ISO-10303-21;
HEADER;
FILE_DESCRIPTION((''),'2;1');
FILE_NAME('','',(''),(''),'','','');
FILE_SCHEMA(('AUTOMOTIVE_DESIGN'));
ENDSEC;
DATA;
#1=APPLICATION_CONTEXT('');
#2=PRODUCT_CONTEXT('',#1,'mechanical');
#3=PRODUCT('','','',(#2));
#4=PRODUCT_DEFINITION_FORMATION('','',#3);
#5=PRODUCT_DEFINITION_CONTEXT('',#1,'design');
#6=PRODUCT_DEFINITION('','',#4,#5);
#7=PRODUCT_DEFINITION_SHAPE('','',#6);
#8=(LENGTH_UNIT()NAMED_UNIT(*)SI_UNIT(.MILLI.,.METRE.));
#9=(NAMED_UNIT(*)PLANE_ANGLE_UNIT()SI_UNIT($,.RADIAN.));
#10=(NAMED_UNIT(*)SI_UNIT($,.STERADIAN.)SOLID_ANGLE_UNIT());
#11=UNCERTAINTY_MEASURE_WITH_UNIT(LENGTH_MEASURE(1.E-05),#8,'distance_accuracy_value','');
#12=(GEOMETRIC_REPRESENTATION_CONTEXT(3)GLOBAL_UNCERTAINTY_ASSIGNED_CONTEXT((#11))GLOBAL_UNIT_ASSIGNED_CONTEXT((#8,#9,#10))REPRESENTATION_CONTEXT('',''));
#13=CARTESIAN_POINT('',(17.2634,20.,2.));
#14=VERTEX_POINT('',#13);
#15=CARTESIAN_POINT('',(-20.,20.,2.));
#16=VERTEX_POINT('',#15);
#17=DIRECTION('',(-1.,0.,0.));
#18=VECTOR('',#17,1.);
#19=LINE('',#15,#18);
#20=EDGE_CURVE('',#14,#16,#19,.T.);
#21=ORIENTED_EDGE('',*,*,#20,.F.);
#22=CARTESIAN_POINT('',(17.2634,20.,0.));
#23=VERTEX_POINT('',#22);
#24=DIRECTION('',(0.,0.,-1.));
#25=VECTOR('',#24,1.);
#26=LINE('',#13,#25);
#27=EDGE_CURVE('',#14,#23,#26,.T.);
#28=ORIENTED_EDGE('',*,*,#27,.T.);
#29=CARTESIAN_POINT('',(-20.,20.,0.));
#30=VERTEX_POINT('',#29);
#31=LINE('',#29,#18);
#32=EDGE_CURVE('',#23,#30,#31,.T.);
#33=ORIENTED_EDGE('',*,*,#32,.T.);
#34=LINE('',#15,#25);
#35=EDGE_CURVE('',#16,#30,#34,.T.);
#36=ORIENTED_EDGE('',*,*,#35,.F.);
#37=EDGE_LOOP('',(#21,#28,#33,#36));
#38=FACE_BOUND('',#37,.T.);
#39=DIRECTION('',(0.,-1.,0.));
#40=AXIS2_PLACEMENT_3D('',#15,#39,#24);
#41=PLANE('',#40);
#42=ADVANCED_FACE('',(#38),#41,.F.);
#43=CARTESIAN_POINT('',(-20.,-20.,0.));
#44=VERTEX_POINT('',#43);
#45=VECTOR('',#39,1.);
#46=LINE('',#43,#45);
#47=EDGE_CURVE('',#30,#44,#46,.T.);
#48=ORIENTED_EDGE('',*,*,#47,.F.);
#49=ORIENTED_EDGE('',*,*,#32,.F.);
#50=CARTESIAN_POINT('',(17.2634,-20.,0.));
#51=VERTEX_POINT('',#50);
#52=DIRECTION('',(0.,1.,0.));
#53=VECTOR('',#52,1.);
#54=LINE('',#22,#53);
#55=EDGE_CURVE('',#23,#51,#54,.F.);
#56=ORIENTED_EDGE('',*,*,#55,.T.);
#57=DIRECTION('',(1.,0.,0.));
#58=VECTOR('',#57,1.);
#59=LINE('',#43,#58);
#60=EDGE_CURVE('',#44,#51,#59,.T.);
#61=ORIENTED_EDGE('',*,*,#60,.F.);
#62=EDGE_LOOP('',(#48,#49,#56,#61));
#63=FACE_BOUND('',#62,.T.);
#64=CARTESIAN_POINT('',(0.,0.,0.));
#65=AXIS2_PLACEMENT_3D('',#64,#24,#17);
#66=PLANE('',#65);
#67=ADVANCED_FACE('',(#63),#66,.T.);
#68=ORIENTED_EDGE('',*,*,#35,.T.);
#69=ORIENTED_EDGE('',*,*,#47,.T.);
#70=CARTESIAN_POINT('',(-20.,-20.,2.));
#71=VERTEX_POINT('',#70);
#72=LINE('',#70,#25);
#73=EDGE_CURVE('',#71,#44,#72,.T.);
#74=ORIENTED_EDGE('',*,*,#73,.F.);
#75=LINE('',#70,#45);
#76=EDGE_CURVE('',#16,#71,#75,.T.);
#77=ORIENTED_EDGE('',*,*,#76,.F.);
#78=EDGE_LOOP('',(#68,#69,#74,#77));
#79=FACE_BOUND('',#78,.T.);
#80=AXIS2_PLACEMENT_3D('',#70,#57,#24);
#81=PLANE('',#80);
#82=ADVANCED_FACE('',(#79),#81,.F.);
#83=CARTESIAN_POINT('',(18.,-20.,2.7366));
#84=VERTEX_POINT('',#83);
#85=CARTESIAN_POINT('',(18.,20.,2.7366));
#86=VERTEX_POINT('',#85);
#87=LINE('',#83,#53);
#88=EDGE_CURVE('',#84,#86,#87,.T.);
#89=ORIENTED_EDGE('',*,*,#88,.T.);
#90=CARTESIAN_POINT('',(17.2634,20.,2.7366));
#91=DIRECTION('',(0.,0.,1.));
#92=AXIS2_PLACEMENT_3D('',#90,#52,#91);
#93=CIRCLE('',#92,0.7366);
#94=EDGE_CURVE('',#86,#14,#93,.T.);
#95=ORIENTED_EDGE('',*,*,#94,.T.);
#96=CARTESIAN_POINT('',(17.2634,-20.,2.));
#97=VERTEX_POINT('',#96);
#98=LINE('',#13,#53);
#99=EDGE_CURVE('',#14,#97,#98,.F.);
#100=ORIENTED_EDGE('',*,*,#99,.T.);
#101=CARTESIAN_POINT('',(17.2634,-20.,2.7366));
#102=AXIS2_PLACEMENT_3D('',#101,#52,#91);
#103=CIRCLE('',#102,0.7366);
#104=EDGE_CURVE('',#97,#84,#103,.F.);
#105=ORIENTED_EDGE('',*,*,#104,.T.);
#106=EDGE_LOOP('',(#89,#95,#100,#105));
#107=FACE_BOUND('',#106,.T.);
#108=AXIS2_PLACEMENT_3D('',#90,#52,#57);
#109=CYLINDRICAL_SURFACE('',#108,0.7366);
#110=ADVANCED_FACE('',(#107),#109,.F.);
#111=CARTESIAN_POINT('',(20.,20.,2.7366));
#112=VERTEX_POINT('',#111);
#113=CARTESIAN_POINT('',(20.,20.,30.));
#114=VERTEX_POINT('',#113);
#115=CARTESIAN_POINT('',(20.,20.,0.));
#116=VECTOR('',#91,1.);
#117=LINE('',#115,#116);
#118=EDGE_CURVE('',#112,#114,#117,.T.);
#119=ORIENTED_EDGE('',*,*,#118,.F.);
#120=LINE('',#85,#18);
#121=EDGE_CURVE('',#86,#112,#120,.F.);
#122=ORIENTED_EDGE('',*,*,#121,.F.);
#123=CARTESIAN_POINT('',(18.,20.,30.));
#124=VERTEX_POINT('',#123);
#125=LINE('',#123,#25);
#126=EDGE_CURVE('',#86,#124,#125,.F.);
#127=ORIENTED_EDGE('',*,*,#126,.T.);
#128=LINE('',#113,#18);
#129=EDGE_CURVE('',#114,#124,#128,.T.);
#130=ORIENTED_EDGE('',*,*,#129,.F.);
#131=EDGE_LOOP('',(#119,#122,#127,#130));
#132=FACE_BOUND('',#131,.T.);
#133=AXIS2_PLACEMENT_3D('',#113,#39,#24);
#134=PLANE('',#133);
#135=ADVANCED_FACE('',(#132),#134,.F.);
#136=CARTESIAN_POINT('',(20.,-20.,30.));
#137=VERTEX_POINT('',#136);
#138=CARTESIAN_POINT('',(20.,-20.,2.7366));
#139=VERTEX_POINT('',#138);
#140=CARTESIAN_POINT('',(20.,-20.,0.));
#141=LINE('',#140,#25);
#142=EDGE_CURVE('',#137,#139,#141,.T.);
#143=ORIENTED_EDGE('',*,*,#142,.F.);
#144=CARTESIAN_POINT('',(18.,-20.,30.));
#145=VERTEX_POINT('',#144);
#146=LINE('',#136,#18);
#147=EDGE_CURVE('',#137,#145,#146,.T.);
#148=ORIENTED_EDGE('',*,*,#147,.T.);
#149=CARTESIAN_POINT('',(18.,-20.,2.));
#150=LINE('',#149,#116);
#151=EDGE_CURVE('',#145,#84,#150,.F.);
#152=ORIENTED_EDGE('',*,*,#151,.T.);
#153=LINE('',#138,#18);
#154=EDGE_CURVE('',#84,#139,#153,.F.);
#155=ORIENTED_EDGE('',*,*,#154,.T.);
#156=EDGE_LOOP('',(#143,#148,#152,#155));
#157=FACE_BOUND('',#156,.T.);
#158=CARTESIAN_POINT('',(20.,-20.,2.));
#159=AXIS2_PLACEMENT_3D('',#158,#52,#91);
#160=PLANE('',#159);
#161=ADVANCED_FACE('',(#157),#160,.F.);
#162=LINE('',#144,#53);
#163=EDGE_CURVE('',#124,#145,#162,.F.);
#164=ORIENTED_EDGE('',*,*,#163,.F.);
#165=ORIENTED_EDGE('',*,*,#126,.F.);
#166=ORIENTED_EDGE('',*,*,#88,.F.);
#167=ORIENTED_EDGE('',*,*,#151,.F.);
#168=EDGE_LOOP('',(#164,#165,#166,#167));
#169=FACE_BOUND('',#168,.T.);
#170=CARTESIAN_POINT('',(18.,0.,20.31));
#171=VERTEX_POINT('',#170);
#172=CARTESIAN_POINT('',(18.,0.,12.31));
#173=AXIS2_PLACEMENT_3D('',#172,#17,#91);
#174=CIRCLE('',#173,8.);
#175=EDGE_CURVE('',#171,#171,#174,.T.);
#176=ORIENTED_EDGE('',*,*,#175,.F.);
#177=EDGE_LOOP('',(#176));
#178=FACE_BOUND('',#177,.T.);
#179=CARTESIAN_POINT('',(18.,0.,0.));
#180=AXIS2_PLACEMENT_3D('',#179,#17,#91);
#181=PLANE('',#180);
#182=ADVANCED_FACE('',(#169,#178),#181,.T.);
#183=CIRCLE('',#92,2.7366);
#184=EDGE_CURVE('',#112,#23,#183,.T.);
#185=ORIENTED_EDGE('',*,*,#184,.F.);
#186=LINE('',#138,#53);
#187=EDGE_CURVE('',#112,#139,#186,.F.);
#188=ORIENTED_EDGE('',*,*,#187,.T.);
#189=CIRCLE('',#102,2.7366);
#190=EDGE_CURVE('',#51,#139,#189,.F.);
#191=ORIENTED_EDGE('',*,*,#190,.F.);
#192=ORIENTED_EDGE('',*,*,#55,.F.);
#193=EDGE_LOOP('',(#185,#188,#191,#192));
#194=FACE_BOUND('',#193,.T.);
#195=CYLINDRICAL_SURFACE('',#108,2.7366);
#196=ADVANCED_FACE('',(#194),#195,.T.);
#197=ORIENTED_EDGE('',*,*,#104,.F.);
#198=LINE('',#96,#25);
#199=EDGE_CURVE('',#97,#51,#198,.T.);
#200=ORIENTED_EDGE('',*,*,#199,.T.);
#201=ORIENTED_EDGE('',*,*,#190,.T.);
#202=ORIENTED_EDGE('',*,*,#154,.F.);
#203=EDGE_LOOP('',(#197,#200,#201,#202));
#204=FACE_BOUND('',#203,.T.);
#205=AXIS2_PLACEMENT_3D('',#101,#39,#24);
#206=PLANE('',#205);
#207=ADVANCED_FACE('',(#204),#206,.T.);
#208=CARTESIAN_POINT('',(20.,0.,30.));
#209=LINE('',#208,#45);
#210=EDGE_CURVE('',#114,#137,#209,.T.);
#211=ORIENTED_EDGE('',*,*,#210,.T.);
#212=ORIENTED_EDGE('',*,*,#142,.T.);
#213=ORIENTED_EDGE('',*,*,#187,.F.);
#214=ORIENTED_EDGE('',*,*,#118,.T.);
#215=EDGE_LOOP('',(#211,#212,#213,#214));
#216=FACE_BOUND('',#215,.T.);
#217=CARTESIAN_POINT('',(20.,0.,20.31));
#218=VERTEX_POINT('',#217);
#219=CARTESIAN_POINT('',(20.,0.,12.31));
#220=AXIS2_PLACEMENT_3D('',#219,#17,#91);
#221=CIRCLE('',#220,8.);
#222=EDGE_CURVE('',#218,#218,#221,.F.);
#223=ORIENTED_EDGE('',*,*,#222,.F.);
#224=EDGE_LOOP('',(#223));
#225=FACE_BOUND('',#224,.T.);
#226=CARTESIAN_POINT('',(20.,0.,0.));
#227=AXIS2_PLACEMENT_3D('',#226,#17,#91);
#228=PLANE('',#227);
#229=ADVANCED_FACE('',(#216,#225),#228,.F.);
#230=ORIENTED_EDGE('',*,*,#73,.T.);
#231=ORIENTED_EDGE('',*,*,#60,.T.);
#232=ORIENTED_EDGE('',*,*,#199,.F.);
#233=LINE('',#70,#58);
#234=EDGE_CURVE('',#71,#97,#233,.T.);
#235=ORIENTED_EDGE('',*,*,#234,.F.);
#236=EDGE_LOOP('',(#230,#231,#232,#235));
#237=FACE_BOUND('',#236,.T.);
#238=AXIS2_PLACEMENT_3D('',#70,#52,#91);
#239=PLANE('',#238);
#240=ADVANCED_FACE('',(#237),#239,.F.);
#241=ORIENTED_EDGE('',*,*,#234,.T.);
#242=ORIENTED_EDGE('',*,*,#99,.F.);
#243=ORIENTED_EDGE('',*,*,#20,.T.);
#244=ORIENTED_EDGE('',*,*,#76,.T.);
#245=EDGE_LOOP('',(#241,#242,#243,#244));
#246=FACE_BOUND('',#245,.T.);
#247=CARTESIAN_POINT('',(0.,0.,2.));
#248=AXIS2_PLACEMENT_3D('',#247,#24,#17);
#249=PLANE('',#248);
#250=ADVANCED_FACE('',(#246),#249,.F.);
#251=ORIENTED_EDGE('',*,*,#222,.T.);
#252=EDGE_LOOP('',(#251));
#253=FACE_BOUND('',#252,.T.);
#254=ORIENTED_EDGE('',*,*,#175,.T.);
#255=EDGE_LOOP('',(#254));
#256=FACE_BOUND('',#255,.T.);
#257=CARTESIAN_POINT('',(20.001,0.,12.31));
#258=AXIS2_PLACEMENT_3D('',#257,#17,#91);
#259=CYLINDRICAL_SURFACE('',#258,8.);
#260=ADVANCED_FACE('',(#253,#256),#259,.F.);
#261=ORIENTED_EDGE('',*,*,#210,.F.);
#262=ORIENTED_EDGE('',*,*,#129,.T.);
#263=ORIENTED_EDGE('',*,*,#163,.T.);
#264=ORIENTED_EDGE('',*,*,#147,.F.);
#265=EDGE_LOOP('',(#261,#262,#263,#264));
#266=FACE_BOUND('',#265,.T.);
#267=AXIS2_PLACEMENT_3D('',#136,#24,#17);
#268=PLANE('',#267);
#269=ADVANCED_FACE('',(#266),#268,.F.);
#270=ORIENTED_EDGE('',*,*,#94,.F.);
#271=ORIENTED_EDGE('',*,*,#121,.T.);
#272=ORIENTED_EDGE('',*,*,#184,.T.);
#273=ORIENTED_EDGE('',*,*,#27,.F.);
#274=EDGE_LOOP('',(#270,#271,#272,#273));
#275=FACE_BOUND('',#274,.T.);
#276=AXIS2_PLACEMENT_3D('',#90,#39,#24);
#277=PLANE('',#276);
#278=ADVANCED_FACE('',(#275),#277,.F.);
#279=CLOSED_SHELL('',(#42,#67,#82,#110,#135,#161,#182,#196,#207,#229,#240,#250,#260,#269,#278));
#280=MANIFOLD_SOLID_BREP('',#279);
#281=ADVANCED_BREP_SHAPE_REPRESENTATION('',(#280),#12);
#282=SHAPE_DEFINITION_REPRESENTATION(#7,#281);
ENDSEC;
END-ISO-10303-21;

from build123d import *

# Parameters (mm, degrees)
CROQUIS1_W                       = 40
CROQUIS1_H                       = 40
BRIDA_BASE1_DEPTH                = 2
BRIDA_DE_ARISTA1_STRIP_W         = 9.4732
BRIDA_DE_ARISTA1_STRIP_H         = 2
BRIDA_DE_ARISTA1_STRIP_CUT_DEPTH = 40
BRIDA_DE_ARISTA1_DEPTH           = 40
CORTAR_EXTRUIR2_REACH            = 54.383
CROQUIS11_R                      = 8


# Sheet-metal steps are written as plain solids
with BuildPart() as part:
    # Croquis1 → Brida base1 (new body)
    with BuildSketch(Plane.XY):
        Rectangle(CROQUIS1_W, CROQUIS1_H)
    extrude(amount=BRIDA_BASE1_DEPTH)

    # Brida de arista1 strip (across the edge) → Brida de arista1 strip cut (cut)
    with BuildSketch(Plane(origin=(20, -20, 2), x_dir=(-1, 0, 0), z_dir=(0, 1, 0))):
        with Locations((-2, -1)):
            Rectangle(BRIDA_DE_ARISTA1_STRIP_W, BRIDA_DE_ARISTA1_STRIP_H)
    extrude(amount=BRIDA_DE_ARISTA1_STRIP_CUT_DEPTH, mode=Mode.SUBTRACT)

    # Brida de arista1 section (across the edge) → Brida de arista1 (add)
    with BuildSketch(Plane(origin=(20, -20, 2), x_dir=(-1, 0, 0), z_dir=(0, 1, 0))):
        with BuildLine():
            Line((0, 0.7366), (0, 28))
            Line((0, 28), (2, 28))
            Line((2, 28), (2, 0.7366))
            ThreePointArc((2, 0.7366), (2.215745145, 0.215745145), (2.7366, 0))
            Line((2.7366, 0), (2.7366, -2))
            ThreePointArc((2.7366, -2), (0.801531583, -1.198468417), (0, 0.7366))
        make_face()
    extrude(amount=BRIDA_DE_ARISTA1_DEPTH)

    # Croquis11 → Cortar-Extruir2 (cut, up to next)
    with BuildSketch(Plane.ZY.offset(-18), mode=Mode.PRIVATE) as cortar_extruir2_sk1:
        with Locations((12.31, 0)):
            Circle(CROQUIS11_R)
    cortar_extruir2_tool1 = extrude(cortar_extruir2_sk1.sketch, amount=-CORTAR_EXTRUIR2_REACH, mode=Mode.PRIVATE) & part.part
    add(cortar_extruir2_tool1.solids().sort_by_distance((18, 0, 12.31))[0], mode=Mode.SUBTRACT)


solid = part.part
